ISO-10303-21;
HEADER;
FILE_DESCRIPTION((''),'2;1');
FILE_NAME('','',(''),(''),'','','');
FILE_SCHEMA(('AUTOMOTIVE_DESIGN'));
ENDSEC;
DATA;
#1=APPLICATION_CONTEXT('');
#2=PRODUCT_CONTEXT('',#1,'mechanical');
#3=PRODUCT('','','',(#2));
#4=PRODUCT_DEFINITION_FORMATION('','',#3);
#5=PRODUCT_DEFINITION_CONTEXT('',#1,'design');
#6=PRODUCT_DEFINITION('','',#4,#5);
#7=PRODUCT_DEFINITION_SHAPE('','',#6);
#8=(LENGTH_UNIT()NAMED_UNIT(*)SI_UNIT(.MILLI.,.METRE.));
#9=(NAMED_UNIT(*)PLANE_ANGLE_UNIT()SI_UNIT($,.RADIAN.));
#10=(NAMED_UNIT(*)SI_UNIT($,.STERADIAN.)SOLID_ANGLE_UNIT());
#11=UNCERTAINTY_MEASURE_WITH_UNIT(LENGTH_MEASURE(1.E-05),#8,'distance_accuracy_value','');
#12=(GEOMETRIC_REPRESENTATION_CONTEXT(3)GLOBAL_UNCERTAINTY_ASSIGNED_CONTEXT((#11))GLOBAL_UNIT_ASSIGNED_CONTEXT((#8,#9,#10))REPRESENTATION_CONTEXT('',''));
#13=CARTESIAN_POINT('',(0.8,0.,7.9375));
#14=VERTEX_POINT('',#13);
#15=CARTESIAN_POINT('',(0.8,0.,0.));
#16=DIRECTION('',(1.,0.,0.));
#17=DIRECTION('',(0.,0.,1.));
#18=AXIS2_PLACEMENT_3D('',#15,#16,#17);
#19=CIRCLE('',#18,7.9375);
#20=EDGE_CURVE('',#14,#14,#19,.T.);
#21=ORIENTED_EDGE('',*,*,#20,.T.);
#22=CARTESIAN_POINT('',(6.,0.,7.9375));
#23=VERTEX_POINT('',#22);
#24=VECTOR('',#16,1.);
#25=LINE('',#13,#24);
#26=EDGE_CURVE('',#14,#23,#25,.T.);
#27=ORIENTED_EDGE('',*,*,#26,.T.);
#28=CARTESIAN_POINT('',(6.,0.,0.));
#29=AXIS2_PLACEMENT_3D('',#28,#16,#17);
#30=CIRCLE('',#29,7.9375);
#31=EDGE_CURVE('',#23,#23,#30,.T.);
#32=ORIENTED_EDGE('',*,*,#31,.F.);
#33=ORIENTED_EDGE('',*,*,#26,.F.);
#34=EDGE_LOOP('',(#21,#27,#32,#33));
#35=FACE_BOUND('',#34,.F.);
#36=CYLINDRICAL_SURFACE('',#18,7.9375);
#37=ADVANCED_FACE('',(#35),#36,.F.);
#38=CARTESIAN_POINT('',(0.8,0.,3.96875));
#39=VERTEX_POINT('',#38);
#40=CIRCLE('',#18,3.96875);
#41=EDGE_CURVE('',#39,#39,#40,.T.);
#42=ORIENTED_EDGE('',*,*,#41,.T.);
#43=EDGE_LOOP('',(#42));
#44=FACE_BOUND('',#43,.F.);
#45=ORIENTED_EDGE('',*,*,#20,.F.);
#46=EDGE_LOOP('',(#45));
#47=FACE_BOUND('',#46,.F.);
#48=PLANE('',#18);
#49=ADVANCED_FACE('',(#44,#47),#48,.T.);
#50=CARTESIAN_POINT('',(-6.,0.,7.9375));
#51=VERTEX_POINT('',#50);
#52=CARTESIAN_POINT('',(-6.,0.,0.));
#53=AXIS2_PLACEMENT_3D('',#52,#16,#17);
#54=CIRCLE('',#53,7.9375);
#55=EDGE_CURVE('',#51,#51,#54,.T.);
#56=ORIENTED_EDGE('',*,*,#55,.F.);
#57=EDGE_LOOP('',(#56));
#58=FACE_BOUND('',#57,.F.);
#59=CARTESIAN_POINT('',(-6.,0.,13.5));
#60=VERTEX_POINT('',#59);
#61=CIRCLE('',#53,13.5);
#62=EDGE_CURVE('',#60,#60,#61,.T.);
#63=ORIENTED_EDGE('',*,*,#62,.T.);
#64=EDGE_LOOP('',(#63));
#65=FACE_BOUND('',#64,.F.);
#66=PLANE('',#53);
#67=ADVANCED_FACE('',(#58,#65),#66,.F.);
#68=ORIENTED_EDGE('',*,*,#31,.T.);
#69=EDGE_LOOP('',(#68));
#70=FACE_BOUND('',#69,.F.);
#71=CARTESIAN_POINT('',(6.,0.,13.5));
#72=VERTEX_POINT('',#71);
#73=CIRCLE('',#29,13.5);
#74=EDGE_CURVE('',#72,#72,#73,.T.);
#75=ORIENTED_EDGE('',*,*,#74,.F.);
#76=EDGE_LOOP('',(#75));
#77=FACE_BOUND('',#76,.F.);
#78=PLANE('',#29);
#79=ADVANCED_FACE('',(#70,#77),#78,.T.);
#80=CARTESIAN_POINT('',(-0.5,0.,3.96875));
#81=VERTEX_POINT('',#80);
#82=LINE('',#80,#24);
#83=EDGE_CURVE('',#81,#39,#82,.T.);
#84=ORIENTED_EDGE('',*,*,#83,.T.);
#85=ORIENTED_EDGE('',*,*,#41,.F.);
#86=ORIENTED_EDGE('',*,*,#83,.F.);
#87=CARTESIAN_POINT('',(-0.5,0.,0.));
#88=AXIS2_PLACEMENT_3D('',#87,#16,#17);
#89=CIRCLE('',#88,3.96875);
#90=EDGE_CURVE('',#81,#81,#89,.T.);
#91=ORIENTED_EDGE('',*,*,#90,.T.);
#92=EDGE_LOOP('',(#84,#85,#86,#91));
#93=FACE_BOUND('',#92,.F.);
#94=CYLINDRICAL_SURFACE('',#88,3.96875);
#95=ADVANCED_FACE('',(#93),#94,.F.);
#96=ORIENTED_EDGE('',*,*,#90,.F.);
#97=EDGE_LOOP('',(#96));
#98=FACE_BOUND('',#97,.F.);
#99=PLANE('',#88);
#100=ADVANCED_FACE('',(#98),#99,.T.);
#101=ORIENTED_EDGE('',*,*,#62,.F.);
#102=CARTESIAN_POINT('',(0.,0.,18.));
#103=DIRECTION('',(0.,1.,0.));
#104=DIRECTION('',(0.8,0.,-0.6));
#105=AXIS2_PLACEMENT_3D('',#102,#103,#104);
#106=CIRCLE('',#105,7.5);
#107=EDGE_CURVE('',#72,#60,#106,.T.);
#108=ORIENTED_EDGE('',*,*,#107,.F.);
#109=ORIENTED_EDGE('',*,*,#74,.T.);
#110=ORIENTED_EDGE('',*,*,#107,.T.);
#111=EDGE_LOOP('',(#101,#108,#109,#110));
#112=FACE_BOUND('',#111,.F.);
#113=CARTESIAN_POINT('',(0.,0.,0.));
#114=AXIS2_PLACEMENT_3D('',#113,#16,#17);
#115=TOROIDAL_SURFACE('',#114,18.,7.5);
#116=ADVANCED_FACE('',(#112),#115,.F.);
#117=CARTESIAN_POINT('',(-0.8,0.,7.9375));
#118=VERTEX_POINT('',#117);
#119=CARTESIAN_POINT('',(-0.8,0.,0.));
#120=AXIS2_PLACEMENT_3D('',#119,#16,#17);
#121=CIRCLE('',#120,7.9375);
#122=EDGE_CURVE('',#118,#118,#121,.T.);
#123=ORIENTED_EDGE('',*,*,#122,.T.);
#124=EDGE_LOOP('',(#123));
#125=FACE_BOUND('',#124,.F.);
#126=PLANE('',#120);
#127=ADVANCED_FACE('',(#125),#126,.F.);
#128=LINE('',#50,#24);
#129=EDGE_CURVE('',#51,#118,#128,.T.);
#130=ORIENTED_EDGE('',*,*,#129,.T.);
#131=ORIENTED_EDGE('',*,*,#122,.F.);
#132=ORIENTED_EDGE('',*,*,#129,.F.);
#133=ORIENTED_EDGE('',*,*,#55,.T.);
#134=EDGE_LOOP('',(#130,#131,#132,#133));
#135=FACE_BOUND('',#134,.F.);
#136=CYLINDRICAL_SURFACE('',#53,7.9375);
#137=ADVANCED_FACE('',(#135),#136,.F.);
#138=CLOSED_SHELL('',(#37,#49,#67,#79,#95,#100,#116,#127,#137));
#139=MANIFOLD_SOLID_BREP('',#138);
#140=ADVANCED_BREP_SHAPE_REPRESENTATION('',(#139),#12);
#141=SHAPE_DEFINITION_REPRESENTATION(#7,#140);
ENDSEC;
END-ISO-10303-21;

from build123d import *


# Not quite as in the source:
# - a feature names something its author has since deleted; it is built from what else it names


with BuildPart() as f1:
    # F0 (on Front) → F1 (revolve)
    with BuildSketch(Plane.XZ):
        with BuildLine():
            Line((6, 7.9375), (6, 13.5))
            ThreePointArc((6, 13.5), (0, 10.5), (-6, 13.5))
            Line((-6, 13.5), (-6, 7.9375))
            Line((-6, 7.9375), (-0.8, 7.9375))
            Line((-0.8, 7.9375), (-0.8, 0))
            Line((-0.8, 0), (-0.5, 0))
            Line((-0.5, 0), (-0.5, 3.96875))
            Line((-0.5, 3.96875), (0.8, 3.96875))
            Line((0.8, 3.96875), (0.8, 7.9375))
            Line((0.8, 7.9375), (6, 7.9375))
        make_face()
    revolve(axis=Axis((-0.4498892081, 0, 0), (1, 0, 0)))


solid = f1.part
